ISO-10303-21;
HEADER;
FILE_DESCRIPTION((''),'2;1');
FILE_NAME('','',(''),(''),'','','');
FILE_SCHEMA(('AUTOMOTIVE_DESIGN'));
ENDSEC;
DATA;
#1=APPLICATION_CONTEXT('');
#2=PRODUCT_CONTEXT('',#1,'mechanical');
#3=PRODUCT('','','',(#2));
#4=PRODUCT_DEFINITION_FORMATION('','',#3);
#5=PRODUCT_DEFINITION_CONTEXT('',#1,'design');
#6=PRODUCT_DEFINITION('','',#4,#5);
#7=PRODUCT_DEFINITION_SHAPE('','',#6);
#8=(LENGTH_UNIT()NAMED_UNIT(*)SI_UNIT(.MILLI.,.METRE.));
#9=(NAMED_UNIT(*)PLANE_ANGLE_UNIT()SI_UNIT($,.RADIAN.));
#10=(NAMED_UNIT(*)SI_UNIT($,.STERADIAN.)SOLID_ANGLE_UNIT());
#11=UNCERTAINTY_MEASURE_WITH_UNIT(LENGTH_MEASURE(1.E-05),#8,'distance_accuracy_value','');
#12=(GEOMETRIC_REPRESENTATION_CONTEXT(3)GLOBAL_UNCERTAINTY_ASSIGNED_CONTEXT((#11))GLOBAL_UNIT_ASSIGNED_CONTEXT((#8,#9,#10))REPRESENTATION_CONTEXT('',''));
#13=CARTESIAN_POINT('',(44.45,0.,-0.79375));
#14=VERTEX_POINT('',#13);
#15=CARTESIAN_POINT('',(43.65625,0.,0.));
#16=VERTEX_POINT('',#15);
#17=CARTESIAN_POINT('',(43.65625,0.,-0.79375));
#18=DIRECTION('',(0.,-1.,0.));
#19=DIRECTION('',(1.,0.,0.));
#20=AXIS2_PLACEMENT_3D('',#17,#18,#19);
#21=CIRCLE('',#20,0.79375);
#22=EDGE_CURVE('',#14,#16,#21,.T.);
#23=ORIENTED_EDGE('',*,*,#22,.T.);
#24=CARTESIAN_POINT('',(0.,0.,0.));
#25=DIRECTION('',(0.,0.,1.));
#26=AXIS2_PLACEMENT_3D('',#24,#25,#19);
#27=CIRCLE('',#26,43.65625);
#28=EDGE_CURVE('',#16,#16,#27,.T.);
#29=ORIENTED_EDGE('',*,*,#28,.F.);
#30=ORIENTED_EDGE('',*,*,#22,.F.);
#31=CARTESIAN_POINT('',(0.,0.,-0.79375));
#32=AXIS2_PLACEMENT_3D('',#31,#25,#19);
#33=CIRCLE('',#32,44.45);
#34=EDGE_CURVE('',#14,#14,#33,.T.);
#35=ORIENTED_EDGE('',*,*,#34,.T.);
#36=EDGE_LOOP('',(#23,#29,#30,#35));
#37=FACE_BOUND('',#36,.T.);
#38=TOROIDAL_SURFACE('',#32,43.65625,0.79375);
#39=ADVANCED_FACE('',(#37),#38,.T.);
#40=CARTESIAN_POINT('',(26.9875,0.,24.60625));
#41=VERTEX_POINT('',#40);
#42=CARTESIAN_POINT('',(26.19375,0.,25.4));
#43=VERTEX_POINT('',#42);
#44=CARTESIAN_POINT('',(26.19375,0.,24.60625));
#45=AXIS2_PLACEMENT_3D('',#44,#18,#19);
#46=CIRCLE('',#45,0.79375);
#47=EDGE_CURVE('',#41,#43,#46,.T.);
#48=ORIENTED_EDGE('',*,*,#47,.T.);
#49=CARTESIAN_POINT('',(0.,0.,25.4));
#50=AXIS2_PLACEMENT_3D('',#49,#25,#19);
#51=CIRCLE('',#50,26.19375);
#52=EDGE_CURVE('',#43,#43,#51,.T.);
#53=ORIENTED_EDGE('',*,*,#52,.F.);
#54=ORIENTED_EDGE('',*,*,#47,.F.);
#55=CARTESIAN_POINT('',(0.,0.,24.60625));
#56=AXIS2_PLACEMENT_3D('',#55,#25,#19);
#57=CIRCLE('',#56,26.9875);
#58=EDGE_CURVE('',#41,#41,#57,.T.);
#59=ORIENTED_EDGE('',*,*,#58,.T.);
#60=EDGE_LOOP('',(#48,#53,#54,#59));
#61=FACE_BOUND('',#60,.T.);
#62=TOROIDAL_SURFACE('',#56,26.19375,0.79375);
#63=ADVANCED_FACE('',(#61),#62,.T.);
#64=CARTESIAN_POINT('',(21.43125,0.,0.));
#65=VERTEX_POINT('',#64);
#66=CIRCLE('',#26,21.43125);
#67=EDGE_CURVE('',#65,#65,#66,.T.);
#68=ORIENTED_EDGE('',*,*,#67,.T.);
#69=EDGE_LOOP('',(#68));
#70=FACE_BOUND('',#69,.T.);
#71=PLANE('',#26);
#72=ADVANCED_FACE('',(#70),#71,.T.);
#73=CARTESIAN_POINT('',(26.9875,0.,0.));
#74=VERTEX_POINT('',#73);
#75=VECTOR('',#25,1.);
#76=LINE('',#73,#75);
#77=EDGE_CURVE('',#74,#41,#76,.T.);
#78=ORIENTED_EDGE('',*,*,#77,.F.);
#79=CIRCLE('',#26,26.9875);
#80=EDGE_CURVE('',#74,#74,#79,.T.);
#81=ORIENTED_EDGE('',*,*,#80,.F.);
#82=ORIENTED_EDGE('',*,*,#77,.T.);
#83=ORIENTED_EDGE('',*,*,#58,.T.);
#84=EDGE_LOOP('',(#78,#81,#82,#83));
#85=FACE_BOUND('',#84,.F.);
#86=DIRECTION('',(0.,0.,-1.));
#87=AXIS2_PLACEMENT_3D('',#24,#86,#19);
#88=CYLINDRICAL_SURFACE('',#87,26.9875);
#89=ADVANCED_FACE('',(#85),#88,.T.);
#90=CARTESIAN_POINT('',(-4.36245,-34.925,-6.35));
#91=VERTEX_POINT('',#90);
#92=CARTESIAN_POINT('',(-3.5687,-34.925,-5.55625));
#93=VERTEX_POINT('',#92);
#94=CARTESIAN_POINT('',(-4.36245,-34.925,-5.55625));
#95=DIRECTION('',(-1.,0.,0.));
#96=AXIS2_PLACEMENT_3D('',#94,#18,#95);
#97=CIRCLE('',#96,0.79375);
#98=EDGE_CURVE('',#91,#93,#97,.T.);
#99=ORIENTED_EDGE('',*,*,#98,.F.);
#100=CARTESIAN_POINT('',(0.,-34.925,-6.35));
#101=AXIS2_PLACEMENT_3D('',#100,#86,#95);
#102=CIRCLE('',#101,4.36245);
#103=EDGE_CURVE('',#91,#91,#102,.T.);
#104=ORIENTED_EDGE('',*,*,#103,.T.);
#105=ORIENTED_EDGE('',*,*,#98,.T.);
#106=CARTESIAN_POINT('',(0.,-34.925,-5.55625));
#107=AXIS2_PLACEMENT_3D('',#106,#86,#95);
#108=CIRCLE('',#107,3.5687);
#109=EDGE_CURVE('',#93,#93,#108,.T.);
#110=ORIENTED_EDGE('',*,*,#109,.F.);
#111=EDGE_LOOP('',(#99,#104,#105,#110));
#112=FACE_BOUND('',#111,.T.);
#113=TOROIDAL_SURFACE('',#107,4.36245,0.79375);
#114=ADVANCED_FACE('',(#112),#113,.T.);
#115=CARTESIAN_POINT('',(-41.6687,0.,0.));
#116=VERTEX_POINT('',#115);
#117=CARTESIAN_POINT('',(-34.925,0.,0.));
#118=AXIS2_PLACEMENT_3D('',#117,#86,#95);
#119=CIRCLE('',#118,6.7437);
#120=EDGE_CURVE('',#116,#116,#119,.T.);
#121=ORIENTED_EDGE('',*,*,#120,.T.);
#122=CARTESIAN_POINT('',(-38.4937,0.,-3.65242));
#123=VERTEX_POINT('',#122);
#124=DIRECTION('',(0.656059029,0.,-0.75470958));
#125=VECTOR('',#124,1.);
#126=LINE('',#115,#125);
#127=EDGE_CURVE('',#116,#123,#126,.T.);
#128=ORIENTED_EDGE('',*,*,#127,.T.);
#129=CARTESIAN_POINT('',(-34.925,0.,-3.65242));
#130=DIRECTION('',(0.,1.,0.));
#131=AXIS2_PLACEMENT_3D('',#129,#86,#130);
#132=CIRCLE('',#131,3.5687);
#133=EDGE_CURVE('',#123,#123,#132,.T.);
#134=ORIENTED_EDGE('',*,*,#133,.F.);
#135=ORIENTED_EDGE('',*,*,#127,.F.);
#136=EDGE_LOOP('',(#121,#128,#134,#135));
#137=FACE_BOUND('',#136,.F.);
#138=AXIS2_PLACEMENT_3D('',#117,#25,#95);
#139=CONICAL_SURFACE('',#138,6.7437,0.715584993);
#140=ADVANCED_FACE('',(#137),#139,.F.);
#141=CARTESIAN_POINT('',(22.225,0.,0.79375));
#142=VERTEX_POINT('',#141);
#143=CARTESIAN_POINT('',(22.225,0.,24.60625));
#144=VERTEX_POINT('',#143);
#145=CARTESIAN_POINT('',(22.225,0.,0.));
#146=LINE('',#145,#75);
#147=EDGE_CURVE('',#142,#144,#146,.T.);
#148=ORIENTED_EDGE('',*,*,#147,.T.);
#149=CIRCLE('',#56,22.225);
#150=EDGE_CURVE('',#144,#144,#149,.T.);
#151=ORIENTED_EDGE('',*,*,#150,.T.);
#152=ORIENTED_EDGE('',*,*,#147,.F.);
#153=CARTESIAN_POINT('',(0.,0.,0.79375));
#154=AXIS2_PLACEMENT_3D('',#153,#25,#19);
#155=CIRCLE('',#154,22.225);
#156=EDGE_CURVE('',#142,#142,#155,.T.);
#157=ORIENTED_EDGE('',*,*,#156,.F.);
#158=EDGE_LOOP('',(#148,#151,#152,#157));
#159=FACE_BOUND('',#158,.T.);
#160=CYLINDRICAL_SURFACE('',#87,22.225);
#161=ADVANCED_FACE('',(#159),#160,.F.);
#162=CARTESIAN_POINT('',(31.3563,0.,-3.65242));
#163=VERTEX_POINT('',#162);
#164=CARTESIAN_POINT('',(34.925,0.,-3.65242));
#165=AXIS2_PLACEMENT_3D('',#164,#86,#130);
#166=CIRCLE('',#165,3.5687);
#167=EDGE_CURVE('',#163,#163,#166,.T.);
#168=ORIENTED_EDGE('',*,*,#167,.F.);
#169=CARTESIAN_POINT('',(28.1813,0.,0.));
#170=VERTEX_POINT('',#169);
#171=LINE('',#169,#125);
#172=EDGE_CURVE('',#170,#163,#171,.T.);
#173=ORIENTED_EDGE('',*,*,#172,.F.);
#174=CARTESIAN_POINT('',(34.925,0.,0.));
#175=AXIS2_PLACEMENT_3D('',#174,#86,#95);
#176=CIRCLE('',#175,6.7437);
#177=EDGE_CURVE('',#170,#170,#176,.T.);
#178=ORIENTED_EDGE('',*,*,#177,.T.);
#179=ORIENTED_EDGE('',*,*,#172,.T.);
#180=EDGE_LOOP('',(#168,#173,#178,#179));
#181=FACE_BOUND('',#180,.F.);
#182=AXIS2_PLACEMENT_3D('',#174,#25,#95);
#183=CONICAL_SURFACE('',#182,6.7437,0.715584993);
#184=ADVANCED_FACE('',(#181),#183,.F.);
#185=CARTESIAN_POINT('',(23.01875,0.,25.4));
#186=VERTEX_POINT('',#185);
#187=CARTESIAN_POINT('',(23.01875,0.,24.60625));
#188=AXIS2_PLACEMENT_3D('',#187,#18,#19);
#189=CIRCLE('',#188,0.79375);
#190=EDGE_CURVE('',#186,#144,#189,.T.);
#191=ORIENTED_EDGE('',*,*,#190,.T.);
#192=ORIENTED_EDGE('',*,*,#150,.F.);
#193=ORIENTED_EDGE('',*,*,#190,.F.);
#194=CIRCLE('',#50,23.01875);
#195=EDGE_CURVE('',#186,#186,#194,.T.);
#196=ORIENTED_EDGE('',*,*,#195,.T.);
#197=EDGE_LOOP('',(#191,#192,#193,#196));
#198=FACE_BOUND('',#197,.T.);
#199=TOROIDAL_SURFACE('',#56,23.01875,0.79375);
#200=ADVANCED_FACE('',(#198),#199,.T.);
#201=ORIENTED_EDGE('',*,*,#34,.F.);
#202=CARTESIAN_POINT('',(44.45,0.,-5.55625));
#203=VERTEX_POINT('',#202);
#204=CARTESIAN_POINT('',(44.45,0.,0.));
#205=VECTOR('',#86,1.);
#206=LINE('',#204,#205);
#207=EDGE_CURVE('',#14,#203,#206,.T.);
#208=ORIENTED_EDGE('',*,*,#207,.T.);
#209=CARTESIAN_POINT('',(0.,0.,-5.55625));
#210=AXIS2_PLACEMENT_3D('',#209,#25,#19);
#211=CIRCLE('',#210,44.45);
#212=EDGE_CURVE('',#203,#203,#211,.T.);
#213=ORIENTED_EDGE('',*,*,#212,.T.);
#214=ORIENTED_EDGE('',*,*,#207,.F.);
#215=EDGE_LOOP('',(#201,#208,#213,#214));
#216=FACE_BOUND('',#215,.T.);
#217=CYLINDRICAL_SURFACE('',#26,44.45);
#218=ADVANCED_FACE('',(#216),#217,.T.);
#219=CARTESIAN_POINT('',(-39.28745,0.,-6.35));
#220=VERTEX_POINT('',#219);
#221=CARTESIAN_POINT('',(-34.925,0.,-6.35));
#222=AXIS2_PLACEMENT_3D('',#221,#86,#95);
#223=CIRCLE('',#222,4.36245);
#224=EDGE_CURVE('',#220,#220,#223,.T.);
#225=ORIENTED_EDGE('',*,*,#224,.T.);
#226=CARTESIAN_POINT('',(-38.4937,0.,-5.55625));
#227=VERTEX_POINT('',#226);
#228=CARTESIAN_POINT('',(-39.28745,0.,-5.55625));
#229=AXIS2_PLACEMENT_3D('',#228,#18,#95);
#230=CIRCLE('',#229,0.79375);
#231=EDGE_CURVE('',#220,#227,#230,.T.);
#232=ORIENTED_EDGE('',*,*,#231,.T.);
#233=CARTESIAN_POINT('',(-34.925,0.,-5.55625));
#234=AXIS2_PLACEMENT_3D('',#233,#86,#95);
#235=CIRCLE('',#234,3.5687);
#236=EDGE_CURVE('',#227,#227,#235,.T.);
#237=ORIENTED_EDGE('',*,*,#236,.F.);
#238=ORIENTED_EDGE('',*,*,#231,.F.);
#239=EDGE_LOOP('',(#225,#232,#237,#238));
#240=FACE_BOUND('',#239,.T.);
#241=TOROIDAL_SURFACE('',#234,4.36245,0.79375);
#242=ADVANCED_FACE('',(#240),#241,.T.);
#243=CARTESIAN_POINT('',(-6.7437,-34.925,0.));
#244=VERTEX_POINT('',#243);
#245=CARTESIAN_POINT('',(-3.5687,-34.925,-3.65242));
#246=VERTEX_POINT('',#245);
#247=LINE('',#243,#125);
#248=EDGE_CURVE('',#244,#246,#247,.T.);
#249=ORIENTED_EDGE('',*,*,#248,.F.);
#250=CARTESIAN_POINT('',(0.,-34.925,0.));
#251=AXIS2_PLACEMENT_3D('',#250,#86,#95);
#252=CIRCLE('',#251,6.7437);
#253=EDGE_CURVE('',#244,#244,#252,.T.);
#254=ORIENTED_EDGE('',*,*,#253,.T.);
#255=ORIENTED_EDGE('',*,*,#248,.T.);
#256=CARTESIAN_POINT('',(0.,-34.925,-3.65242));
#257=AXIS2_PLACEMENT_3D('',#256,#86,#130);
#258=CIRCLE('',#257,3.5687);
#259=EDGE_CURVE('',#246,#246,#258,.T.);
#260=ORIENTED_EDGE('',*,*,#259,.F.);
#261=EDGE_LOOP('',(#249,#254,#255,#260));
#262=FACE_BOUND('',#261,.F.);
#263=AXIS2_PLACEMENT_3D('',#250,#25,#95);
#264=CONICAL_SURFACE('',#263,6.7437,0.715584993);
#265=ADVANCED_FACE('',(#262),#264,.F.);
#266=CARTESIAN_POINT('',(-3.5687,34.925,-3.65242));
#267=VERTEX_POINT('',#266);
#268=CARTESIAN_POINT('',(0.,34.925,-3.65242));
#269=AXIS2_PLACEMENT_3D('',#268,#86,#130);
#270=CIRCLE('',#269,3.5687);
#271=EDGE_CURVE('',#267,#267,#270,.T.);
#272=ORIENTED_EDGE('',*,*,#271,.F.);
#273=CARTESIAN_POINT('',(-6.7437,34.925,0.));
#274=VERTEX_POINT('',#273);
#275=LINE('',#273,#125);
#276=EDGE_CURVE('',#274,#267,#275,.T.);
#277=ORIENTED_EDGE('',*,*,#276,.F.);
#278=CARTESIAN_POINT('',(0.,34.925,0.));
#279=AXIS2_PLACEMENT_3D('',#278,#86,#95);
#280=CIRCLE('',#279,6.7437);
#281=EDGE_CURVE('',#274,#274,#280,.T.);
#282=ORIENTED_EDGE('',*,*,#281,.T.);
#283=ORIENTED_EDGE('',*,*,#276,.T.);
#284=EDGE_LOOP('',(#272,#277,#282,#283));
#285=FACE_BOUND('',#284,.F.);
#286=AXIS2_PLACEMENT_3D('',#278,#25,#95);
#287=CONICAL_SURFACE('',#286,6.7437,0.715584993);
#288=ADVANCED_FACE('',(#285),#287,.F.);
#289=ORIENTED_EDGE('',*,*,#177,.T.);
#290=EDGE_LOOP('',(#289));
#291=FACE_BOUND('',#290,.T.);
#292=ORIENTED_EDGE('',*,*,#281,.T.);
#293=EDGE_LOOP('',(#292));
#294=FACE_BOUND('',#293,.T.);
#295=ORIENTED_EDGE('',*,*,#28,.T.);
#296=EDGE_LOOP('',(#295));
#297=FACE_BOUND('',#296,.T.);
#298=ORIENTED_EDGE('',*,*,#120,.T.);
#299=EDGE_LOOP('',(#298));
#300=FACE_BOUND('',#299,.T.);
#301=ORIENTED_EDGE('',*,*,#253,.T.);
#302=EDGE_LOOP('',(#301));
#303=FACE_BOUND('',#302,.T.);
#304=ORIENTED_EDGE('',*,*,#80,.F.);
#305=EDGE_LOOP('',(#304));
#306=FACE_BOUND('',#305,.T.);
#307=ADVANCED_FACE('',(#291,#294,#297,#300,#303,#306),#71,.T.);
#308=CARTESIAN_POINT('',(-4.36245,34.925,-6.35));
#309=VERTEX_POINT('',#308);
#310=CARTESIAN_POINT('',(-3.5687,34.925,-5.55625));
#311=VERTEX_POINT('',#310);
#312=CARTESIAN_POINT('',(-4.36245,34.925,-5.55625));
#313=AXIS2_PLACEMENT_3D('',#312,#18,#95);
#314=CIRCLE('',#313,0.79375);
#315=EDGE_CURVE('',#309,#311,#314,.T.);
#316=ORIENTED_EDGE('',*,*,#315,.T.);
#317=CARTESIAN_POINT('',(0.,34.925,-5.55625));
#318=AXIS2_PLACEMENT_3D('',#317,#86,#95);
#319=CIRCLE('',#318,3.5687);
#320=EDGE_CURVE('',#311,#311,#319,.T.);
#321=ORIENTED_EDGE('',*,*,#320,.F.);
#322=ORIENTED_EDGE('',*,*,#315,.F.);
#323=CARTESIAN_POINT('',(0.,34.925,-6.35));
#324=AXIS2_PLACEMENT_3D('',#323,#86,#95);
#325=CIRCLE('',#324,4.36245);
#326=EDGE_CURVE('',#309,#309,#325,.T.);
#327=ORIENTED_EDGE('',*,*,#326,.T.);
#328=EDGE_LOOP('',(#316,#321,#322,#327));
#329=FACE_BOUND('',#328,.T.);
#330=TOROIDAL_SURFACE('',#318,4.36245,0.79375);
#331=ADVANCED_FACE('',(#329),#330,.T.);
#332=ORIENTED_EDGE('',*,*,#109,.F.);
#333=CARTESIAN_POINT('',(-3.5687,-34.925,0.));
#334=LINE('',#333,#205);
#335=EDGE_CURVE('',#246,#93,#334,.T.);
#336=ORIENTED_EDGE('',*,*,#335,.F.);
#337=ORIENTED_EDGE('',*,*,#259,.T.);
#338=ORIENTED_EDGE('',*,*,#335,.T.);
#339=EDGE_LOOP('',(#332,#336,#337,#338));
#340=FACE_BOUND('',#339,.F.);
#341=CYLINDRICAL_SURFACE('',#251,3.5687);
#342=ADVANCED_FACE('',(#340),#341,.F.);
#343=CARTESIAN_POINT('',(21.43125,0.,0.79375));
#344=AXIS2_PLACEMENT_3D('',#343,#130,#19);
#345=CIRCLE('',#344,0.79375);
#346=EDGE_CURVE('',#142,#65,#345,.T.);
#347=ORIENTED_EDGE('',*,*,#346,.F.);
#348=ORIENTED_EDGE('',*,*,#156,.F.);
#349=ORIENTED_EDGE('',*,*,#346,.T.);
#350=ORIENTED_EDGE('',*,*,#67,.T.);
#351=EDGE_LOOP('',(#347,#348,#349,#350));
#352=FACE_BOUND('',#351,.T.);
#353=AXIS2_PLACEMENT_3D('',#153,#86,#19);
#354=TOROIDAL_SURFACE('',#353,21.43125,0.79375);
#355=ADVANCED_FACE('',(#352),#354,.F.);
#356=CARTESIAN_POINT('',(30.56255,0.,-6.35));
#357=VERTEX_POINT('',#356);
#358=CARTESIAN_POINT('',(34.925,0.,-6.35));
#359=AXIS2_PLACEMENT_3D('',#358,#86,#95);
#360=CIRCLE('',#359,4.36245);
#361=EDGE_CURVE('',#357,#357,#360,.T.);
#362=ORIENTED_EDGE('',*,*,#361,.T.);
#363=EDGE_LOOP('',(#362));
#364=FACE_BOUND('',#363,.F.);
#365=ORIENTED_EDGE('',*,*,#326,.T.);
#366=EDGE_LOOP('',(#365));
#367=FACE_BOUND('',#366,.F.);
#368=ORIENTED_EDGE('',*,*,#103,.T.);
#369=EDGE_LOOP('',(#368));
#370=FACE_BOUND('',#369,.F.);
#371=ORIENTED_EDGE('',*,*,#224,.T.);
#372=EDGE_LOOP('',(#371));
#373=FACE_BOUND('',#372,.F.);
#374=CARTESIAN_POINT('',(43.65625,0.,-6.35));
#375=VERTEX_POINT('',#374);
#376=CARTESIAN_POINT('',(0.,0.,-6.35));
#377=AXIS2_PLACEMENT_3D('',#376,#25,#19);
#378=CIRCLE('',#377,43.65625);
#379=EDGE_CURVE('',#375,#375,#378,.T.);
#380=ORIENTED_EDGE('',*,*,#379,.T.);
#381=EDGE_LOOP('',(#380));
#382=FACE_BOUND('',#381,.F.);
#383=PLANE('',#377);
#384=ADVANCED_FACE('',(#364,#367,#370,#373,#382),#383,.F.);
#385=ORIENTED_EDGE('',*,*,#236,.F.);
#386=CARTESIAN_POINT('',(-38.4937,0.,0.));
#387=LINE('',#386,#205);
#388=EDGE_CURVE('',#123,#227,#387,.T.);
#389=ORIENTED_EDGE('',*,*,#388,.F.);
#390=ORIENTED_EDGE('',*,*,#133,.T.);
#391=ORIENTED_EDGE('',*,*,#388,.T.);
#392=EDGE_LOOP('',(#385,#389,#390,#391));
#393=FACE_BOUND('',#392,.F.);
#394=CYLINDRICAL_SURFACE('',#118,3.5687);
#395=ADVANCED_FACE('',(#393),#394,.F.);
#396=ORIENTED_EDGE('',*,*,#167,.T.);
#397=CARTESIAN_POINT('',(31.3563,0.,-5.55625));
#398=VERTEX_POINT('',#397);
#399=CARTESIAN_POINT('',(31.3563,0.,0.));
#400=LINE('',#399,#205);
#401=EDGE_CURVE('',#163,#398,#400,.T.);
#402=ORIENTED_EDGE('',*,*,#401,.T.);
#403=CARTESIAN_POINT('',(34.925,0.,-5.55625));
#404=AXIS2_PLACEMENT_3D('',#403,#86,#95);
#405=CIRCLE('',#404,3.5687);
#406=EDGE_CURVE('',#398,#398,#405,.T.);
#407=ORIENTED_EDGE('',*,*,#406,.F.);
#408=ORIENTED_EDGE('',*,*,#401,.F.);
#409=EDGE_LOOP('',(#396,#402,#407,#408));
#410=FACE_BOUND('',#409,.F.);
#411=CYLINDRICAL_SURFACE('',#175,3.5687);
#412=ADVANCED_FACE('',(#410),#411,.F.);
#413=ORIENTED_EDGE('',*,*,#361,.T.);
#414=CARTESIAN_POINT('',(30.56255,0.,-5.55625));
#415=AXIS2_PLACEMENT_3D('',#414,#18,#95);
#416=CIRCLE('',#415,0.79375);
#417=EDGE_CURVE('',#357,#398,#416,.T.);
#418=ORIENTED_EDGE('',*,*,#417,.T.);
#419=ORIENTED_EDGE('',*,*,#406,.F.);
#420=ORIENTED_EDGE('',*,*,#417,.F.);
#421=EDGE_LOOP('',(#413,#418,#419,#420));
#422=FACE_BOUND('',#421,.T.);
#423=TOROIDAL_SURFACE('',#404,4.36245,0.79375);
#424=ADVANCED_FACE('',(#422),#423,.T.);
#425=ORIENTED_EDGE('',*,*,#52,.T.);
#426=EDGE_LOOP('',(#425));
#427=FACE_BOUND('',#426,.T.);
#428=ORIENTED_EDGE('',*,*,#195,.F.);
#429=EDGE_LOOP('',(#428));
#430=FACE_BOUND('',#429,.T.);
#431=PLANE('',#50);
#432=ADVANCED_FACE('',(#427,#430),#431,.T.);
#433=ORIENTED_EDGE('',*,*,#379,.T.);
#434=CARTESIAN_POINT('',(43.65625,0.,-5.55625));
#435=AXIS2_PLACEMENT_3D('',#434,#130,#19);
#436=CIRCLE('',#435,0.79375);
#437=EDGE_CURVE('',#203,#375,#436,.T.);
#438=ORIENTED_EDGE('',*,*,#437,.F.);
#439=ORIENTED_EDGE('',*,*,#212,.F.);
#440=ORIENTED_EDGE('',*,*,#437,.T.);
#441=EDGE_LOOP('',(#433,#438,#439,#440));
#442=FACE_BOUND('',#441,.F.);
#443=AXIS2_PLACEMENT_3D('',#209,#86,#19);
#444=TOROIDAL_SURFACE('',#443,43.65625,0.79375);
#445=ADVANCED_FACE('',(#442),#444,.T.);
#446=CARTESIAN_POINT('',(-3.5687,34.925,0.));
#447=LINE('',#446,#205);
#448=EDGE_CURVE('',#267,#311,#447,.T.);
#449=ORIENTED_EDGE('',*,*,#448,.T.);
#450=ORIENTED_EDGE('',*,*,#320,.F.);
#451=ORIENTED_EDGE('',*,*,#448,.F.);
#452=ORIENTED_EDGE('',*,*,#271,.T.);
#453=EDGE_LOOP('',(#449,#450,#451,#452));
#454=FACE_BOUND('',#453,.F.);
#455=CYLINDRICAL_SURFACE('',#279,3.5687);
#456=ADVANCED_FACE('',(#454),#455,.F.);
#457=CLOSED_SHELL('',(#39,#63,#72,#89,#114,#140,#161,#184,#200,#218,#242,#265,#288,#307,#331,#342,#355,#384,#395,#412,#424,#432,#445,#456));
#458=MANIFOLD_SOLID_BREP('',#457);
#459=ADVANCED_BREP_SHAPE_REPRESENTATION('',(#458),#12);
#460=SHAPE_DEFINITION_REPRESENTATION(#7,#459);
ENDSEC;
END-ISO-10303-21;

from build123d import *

# Parameters (mm, degrees)
F0_R           = 26.9875
F0_R_2         = 22.225
F1_DEPTH       = 25.4
F0_R_3         = 44.45
F1_FACE_R      = 26.9875
F1_FACE_R_2    = 22.225
F2_DEPTH       = 6.35
F4_D           = 7.1374
F4_CSINK_D     = 13.4874
F4_CSINK_ANGLE = 82
F5_R           = 0.79375


with BuildPart() as f1:
    # F0 (on Top) → F1 (new body)
    with BuildSketch(Plane.XY):
        Circle(F0_R)
        Circle(F0_R_2, mode=Mode.SUBTRACT)
    extrude(amount=F1_DEPTH)

    # F0 (on Top) + F1_face (on face) → F2 (join)
    with BuildSketch(Plane.XY):
        Circle(F0_R_3)
        Circle(F0_R, mode=Mode.SUBTRACT)
        Circle(F0_R)
        Circle(F0_R_2, mode=Mode.SUBTRACT)
        Circle(F0_R_2)
    with BuildSketch(Plane(origin=(0, 0, 0), x_dir=(1, 0, 0), z_dir=(0, 0, -1))):
        Circle(F1_FACE_R)
        Circle(F1_FACE_R_2, mode=Mode.SUBTRACT)
    extrude(amount=-F2_DEPTH, dir=(0, 0, 1))

    # F4 (through all)
    with Locations(Plane.XY):
        with Locations((-34.925, 0), (0, 34.925), (34.925, 0), (0, -34.925)):
            CounterSinkHole(F4_D / 2, F4_CSINK_D / 2, counter_sink_angle=F4_CSINK_ANGLE)

    # F5
    f5_edges = [f1.edges().sort_by_distance(p)[0] for p in [
        (-26.9875, 0, 25.4),
        (-44.45, 0, 0),
        (-44.45, 0, -6.35),
        (-3.5687, -34.925, -6.35),
        (-38.4937, 0, -6.35),
        (31.3563, 0, -6.35),
        (-3.5687, 34.925, -6.35),
        (-22.225, 0, 25.4),
        (22.225, 0, 12.7),
        (-22.225, 0, 0),
    ]]
    fillet(f5_edges, radius=F5_R)


solid = f1.part
